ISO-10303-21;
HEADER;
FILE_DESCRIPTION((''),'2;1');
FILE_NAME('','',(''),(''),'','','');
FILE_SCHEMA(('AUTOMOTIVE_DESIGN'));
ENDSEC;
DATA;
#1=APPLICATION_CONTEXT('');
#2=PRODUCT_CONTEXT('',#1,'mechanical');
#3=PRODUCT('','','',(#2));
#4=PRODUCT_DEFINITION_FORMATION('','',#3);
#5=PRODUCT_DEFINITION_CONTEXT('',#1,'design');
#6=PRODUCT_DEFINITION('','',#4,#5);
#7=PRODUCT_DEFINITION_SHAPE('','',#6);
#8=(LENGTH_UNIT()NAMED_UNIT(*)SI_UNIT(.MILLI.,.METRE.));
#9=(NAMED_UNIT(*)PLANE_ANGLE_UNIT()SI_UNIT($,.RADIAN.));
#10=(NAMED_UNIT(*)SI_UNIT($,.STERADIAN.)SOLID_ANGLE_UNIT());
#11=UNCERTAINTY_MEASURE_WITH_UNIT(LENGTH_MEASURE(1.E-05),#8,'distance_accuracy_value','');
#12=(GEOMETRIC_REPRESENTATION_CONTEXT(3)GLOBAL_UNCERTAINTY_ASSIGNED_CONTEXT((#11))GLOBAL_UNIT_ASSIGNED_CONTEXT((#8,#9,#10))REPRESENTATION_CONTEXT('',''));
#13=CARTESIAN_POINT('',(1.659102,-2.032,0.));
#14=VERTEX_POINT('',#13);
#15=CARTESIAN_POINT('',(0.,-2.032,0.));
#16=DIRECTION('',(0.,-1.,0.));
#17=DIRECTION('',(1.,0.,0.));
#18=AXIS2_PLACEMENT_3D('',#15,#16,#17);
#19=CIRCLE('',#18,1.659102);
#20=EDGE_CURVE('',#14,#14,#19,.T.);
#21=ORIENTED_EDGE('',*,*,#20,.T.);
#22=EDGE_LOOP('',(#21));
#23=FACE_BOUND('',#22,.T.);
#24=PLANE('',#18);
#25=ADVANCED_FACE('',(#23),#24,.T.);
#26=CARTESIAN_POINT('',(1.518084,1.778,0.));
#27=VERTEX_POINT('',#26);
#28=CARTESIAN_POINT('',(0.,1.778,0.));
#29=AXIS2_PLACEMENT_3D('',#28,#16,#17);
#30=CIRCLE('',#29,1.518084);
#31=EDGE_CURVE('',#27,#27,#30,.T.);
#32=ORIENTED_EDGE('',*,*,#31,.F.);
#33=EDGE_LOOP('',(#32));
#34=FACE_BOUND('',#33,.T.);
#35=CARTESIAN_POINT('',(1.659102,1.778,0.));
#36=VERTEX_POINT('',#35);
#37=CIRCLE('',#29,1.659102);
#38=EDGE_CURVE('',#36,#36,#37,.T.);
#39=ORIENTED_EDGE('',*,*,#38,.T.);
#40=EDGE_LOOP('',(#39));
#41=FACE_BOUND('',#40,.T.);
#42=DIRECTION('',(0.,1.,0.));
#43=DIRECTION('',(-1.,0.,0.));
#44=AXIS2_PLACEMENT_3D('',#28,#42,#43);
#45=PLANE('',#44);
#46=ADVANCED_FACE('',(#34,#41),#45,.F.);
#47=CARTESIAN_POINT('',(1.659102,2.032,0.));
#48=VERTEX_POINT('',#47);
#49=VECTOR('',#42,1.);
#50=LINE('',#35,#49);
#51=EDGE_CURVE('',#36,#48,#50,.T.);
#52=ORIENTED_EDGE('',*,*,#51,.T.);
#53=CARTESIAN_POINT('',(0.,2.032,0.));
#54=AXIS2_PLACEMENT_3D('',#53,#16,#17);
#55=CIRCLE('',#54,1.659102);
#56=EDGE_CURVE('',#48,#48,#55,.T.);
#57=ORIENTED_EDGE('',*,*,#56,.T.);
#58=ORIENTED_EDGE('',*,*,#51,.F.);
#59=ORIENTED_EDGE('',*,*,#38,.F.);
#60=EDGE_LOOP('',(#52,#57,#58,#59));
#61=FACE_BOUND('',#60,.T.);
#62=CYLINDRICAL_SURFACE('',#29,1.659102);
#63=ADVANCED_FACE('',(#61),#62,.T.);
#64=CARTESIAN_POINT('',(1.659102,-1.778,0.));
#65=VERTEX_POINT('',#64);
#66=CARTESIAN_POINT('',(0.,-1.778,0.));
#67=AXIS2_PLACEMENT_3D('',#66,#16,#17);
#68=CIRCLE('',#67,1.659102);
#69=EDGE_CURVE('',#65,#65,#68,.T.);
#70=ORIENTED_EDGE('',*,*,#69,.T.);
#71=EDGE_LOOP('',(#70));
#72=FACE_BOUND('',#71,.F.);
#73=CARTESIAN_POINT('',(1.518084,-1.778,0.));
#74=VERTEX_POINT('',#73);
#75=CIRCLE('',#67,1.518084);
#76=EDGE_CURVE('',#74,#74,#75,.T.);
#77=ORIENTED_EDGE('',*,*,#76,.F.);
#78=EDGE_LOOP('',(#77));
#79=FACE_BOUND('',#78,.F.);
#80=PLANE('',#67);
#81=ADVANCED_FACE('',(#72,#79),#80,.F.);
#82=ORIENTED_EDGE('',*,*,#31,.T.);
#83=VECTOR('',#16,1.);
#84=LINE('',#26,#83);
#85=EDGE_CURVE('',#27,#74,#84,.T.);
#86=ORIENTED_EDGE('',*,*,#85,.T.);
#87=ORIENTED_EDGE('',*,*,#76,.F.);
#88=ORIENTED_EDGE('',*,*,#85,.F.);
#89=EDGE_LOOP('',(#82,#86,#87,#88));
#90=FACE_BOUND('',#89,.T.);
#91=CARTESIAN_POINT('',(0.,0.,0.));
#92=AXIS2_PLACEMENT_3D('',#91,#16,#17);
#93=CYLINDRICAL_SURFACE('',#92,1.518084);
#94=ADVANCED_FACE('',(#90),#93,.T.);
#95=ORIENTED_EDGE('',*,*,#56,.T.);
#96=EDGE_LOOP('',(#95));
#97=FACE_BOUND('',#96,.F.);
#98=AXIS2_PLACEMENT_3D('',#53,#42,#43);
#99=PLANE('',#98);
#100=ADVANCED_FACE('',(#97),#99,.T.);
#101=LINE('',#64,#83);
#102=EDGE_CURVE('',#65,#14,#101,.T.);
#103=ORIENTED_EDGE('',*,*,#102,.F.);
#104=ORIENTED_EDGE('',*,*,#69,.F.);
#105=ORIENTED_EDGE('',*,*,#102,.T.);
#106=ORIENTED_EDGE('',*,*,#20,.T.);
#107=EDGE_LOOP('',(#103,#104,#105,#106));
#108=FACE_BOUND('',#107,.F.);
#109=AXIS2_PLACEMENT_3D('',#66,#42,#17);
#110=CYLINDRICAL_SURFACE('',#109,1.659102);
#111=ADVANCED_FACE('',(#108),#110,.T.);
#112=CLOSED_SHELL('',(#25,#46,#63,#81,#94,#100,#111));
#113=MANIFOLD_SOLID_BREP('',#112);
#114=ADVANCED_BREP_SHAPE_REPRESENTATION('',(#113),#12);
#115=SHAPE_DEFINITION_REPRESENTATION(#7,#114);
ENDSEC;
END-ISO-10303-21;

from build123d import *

# Parameters (mm, degrees)
F0_R          = 1.5180836213
F1_DEPTH      = 1.778
F1_DEPTH_BACK = 1.778
F2_R          = 1.6591021796
F3_DEPTH      = 0.254


# Not quite as in the source:
# - a pattern or mirror of a feature is missing from the dataset's text; its kind, count and spacing are read off the source's solid


with BuildPart() as f1:
    # F0 (on Front) → F1 (new body, two sides)
    with BuildSketch(Plane.XZ) as f1_sk:
        Circle(F0_R)
    extrude(amount=F1_DEPTH)
    extrude(f1_sk.sketch, amount=-F1_DEPTH_BACK)

    # F2 (on face) → F3 (join)
    with BuildSketch(Plane.XZ.offset(1.778)):
        Circle(F2_R)
    f3 = extrude(amount=F3_DEPTH)

    # F3_copies: F3 across plane
    add(f3.mirror(Plane.ZX))


solid = f1.part
